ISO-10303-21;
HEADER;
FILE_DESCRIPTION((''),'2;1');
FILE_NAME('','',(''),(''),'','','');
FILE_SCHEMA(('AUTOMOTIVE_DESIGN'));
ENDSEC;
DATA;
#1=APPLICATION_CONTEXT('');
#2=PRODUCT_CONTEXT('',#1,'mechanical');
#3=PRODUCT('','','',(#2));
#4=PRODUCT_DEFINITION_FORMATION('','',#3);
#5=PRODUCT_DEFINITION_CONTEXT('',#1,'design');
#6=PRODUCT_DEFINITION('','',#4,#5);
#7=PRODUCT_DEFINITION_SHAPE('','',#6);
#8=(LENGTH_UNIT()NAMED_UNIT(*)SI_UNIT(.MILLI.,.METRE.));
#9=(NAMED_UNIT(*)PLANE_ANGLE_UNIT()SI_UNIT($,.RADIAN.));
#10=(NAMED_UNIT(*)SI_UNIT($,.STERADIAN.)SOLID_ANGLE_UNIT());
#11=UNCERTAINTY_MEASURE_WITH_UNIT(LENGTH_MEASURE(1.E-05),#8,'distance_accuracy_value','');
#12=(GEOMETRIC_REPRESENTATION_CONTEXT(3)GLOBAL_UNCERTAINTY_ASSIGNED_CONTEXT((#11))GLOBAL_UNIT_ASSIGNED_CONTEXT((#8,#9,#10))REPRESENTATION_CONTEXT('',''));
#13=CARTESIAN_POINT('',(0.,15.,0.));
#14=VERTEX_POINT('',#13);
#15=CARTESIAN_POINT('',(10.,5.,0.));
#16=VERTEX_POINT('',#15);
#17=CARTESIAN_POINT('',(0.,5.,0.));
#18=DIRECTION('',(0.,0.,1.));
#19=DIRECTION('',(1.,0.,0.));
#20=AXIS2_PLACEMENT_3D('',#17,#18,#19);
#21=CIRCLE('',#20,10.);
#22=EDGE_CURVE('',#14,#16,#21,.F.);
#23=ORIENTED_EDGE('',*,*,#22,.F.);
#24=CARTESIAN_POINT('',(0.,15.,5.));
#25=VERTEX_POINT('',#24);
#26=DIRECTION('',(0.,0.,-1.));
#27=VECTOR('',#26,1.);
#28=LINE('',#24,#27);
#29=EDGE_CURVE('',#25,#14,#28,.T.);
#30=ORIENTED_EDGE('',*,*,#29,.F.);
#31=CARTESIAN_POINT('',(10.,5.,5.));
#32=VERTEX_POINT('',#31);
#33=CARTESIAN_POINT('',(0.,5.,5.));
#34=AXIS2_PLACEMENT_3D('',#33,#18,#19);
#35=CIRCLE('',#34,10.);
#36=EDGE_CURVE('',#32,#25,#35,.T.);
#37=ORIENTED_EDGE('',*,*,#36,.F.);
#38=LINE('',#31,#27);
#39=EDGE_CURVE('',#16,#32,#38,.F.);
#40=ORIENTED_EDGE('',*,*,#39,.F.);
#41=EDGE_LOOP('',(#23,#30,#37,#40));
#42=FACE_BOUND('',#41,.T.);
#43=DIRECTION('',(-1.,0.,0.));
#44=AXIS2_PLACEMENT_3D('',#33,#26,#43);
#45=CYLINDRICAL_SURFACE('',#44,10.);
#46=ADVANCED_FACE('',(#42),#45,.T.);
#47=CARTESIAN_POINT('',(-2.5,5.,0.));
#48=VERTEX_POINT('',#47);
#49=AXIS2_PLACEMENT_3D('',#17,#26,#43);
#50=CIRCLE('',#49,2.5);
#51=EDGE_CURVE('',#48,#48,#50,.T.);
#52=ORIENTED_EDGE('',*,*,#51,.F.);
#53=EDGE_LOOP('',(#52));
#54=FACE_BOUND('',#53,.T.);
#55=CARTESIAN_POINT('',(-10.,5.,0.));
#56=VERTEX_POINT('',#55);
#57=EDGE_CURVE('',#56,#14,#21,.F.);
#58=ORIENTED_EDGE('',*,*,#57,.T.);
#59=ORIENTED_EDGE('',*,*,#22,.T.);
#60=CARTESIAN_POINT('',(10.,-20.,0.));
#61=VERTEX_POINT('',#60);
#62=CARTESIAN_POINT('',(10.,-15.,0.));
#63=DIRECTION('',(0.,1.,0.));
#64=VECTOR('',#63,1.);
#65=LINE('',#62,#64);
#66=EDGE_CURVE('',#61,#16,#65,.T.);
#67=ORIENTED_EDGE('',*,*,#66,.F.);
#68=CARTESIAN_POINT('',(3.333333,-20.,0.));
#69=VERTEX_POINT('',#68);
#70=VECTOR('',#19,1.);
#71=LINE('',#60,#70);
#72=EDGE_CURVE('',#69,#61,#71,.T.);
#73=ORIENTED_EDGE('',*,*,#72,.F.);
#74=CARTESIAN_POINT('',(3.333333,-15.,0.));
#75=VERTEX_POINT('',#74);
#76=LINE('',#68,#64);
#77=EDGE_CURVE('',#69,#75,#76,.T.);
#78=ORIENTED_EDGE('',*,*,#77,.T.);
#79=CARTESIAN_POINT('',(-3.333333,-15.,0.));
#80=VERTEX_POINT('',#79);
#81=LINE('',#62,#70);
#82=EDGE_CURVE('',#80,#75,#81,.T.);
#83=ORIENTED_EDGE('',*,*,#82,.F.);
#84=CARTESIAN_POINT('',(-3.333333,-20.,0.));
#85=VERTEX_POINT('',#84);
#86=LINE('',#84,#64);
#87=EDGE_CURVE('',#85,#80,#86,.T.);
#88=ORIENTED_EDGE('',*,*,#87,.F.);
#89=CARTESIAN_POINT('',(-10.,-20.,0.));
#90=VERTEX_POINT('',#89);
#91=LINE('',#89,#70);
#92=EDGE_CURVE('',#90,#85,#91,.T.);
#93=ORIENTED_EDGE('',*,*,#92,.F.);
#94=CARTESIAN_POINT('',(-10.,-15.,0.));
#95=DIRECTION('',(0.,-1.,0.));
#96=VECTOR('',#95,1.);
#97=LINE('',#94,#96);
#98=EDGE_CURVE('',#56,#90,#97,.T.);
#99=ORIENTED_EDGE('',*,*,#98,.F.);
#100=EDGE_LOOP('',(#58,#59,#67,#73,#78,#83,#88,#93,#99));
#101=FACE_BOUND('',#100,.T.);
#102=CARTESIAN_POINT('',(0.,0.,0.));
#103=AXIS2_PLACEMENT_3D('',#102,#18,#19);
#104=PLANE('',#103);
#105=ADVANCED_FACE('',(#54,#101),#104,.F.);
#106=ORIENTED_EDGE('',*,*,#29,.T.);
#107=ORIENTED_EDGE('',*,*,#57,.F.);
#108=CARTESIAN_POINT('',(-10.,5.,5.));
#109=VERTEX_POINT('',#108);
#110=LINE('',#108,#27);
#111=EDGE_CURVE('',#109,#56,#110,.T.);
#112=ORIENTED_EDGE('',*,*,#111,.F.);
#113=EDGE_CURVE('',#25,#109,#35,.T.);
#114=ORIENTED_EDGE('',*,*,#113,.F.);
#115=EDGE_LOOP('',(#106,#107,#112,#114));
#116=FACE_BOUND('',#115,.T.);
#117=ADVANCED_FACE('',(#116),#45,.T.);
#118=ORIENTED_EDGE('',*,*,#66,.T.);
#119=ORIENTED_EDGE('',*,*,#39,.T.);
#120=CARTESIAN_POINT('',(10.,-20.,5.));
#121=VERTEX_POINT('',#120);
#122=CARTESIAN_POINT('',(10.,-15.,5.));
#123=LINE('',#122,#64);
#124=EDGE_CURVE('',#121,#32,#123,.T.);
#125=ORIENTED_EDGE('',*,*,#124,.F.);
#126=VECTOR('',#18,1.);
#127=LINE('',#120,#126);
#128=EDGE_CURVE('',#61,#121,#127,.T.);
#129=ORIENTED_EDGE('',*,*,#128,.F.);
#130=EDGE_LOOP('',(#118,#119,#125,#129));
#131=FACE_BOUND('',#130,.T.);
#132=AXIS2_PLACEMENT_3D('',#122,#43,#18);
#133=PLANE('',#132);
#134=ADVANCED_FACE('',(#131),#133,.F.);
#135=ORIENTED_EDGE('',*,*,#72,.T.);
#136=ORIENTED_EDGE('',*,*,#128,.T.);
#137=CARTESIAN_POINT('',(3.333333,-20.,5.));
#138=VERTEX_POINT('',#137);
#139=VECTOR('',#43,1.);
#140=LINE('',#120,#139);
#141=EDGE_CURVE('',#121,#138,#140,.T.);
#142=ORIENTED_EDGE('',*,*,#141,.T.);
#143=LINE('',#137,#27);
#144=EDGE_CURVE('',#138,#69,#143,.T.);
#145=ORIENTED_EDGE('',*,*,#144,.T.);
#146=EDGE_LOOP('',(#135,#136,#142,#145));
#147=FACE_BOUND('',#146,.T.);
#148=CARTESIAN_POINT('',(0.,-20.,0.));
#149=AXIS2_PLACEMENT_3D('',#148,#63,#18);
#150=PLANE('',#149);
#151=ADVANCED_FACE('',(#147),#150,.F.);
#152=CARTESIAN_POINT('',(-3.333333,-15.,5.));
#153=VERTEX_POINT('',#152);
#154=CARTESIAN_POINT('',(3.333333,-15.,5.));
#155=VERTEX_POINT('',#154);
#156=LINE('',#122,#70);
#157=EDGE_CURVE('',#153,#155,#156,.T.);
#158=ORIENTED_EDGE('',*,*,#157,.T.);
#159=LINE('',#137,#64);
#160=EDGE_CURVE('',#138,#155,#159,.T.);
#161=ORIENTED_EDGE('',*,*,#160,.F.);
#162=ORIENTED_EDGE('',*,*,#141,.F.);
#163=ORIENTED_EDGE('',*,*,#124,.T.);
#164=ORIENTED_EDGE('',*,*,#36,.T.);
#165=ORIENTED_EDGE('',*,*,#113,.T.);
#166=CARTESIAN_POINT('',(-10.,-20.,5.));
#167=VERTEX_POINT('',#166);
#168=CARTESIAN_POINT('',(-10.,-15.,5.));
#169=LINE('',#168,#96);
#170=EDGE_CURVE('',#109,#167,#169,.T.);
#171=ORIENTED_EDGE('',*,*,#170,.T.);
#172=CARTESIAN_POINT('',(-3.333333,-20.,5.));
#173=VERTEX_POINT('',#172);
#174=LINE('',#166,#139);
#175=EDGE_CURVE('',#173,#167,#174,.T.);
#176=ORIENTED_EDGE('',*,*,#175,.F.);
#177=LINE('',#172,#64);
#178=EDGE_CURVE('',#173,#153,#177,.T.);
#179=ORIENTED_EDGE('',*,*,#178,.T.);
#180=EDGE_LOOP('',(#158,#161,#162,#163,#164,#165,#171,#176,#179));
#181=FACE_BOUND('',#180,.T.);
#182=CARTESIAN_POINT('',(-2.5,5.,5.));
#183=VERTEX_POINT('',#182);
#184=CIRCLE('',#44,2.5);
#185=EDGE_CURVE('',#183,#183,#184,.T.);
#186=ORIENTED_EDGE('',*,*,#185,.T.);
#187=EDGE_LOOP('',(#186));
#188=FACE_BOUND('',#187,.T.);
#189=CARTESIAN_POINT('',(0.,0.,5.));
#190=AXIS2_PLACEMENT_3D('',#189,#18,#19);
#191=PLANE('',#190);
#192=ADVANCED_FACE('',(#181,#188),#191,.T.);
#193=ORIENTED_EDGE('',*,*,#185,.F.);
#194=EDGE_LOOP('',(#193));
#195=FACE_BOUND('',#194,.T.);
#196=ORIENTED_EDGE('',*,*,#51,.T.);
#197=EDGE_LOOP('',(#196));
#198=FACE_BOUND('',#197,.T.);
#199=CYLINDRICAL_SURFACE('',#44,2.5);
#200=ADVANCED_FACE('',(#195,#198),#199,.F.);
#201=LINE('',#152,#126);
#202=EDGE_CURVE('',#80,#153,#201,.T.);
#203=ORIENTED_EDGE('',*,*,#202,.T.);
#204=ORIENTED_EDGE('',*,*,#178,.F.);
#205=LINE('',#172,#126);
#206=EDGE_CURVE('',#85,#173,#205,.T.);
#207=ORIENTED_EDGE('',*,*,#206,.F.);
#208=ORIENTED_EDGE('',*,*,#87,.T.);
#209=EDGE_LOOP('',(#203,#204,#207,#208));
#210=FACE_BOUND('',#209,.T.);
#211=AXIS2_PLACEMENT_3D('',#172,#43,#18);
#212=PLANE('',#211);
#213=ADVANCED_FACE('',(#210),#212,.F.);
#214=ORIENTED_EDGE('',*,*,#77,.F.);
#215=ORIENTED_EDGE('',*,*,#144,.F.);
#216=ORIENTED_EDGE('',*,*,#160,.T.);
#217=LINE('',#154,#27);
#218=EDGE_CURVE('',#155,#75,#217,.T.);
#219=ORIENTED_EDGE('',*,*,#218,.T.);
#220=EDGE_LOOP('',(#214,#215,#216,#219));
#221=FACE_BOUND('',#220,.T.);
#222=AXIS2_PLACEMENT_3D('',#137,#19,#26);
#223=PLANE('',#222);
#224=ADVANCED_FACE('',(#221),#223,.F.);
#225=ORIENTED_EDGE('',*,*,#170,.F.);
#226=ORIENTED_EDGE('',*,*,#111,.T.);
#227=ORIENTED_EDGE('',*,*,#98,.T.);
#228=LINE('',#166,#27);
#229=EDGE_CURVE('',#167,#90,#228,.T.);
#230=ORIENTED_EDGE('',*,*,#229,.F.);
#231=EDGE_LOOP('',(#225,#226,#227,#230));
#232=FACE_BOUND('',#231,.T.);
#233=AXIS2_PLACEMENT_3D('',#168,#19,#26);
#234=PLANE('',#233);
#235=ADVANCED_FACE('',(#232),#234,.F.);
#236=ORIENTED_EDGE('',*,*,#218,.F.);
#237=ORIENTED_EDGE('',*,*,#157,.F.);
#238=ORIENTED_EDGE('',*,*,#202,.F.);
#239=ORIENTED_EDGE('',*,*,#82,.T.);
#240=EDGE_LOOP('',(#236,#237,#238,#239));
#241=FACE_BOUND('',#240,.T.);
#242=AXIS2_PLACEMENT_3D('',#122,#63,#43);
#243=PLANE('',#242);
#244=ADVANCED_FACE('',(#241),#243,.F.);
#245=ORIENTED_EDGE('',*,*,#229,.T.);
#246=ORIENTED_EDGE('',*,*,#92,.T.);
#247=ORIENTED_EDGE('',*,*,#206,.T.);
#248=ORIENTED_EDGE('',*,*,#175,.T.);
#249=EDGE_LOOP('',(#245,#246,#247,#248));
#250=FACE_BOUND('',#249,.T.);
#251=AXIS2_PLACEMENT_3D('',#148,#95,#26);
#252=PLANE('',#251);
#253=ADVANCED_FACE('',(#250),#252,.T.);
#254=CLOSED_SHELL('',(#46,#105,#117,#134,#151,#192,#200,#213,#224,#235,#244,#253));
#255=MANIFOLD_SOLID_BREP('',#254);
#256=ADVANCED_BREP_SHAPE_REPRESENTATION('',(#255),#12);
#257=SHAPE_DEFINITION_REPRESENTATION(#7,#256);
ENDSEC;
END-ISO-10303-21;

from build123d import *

# Parameters (mm, degrees)
SKETCH1_W           = 20
SKETCH1_H           = 30
BOSS_EXTRUDE1_DEPTH = 5
FILLET2_R           = 10
SKETCH2_R           = 2.5
CUT_EXTRUDE1_DEPTH  = 19.708286934
SKETCH3_W           = 6.666666667
SKETCH3_H           = 5
BOSS_EXTRUDE2_DEPTH = 5


with BuildPart() as part:
    # Sketch1 → Boss-Extrude1 (new body)
    with BuildSketch(Plane.XY):
        Rectangle(SKETCH1_W, SKETCH1_H)
    extrude(amount=BOSS_EXTRUDE1_DEPTH)

    # Fillet2
    fillet2_edges = [part.edges().sort_by_distance(p)[0] for p in [
        (-10, 15, 2.5),
        (10, 15, 2.5),
    ]]
    fillet(fillet2_edges, radius=FILLET2_R - 0.0001)  # a hair under: the kernel refuses the full size

    # Sketch2 → Cut-Extrude1 (cut, through all)
    with BuildSketch(Plane(origin=(0, 0, 0), x_dir=(-1, 0, 0), z_dir=(0, 0, -1))):
        with Locations((0, 5)):
            Circle(SKETCH2_R)
    extrude(amount=-CUT_EXTRUDE1_DEPTH, mode=Mode.SUBTRACT)

    # Sketch3 → Boss-Extrude2 (add)
    with BuildSketch(Plane.XZ.offset(15)):
        with Locations((-6.666666667, 2.5)):
            Rectangle(SKETCH3_W, SKETCH3_H)
        with Locations((6.666666667, 2.5)):
            Rectangle(SKETCH3_W, SKETCH3_H)
    extrude(amount=BOSS_EXTRUDE2_DEPTH)


solid = part.part
